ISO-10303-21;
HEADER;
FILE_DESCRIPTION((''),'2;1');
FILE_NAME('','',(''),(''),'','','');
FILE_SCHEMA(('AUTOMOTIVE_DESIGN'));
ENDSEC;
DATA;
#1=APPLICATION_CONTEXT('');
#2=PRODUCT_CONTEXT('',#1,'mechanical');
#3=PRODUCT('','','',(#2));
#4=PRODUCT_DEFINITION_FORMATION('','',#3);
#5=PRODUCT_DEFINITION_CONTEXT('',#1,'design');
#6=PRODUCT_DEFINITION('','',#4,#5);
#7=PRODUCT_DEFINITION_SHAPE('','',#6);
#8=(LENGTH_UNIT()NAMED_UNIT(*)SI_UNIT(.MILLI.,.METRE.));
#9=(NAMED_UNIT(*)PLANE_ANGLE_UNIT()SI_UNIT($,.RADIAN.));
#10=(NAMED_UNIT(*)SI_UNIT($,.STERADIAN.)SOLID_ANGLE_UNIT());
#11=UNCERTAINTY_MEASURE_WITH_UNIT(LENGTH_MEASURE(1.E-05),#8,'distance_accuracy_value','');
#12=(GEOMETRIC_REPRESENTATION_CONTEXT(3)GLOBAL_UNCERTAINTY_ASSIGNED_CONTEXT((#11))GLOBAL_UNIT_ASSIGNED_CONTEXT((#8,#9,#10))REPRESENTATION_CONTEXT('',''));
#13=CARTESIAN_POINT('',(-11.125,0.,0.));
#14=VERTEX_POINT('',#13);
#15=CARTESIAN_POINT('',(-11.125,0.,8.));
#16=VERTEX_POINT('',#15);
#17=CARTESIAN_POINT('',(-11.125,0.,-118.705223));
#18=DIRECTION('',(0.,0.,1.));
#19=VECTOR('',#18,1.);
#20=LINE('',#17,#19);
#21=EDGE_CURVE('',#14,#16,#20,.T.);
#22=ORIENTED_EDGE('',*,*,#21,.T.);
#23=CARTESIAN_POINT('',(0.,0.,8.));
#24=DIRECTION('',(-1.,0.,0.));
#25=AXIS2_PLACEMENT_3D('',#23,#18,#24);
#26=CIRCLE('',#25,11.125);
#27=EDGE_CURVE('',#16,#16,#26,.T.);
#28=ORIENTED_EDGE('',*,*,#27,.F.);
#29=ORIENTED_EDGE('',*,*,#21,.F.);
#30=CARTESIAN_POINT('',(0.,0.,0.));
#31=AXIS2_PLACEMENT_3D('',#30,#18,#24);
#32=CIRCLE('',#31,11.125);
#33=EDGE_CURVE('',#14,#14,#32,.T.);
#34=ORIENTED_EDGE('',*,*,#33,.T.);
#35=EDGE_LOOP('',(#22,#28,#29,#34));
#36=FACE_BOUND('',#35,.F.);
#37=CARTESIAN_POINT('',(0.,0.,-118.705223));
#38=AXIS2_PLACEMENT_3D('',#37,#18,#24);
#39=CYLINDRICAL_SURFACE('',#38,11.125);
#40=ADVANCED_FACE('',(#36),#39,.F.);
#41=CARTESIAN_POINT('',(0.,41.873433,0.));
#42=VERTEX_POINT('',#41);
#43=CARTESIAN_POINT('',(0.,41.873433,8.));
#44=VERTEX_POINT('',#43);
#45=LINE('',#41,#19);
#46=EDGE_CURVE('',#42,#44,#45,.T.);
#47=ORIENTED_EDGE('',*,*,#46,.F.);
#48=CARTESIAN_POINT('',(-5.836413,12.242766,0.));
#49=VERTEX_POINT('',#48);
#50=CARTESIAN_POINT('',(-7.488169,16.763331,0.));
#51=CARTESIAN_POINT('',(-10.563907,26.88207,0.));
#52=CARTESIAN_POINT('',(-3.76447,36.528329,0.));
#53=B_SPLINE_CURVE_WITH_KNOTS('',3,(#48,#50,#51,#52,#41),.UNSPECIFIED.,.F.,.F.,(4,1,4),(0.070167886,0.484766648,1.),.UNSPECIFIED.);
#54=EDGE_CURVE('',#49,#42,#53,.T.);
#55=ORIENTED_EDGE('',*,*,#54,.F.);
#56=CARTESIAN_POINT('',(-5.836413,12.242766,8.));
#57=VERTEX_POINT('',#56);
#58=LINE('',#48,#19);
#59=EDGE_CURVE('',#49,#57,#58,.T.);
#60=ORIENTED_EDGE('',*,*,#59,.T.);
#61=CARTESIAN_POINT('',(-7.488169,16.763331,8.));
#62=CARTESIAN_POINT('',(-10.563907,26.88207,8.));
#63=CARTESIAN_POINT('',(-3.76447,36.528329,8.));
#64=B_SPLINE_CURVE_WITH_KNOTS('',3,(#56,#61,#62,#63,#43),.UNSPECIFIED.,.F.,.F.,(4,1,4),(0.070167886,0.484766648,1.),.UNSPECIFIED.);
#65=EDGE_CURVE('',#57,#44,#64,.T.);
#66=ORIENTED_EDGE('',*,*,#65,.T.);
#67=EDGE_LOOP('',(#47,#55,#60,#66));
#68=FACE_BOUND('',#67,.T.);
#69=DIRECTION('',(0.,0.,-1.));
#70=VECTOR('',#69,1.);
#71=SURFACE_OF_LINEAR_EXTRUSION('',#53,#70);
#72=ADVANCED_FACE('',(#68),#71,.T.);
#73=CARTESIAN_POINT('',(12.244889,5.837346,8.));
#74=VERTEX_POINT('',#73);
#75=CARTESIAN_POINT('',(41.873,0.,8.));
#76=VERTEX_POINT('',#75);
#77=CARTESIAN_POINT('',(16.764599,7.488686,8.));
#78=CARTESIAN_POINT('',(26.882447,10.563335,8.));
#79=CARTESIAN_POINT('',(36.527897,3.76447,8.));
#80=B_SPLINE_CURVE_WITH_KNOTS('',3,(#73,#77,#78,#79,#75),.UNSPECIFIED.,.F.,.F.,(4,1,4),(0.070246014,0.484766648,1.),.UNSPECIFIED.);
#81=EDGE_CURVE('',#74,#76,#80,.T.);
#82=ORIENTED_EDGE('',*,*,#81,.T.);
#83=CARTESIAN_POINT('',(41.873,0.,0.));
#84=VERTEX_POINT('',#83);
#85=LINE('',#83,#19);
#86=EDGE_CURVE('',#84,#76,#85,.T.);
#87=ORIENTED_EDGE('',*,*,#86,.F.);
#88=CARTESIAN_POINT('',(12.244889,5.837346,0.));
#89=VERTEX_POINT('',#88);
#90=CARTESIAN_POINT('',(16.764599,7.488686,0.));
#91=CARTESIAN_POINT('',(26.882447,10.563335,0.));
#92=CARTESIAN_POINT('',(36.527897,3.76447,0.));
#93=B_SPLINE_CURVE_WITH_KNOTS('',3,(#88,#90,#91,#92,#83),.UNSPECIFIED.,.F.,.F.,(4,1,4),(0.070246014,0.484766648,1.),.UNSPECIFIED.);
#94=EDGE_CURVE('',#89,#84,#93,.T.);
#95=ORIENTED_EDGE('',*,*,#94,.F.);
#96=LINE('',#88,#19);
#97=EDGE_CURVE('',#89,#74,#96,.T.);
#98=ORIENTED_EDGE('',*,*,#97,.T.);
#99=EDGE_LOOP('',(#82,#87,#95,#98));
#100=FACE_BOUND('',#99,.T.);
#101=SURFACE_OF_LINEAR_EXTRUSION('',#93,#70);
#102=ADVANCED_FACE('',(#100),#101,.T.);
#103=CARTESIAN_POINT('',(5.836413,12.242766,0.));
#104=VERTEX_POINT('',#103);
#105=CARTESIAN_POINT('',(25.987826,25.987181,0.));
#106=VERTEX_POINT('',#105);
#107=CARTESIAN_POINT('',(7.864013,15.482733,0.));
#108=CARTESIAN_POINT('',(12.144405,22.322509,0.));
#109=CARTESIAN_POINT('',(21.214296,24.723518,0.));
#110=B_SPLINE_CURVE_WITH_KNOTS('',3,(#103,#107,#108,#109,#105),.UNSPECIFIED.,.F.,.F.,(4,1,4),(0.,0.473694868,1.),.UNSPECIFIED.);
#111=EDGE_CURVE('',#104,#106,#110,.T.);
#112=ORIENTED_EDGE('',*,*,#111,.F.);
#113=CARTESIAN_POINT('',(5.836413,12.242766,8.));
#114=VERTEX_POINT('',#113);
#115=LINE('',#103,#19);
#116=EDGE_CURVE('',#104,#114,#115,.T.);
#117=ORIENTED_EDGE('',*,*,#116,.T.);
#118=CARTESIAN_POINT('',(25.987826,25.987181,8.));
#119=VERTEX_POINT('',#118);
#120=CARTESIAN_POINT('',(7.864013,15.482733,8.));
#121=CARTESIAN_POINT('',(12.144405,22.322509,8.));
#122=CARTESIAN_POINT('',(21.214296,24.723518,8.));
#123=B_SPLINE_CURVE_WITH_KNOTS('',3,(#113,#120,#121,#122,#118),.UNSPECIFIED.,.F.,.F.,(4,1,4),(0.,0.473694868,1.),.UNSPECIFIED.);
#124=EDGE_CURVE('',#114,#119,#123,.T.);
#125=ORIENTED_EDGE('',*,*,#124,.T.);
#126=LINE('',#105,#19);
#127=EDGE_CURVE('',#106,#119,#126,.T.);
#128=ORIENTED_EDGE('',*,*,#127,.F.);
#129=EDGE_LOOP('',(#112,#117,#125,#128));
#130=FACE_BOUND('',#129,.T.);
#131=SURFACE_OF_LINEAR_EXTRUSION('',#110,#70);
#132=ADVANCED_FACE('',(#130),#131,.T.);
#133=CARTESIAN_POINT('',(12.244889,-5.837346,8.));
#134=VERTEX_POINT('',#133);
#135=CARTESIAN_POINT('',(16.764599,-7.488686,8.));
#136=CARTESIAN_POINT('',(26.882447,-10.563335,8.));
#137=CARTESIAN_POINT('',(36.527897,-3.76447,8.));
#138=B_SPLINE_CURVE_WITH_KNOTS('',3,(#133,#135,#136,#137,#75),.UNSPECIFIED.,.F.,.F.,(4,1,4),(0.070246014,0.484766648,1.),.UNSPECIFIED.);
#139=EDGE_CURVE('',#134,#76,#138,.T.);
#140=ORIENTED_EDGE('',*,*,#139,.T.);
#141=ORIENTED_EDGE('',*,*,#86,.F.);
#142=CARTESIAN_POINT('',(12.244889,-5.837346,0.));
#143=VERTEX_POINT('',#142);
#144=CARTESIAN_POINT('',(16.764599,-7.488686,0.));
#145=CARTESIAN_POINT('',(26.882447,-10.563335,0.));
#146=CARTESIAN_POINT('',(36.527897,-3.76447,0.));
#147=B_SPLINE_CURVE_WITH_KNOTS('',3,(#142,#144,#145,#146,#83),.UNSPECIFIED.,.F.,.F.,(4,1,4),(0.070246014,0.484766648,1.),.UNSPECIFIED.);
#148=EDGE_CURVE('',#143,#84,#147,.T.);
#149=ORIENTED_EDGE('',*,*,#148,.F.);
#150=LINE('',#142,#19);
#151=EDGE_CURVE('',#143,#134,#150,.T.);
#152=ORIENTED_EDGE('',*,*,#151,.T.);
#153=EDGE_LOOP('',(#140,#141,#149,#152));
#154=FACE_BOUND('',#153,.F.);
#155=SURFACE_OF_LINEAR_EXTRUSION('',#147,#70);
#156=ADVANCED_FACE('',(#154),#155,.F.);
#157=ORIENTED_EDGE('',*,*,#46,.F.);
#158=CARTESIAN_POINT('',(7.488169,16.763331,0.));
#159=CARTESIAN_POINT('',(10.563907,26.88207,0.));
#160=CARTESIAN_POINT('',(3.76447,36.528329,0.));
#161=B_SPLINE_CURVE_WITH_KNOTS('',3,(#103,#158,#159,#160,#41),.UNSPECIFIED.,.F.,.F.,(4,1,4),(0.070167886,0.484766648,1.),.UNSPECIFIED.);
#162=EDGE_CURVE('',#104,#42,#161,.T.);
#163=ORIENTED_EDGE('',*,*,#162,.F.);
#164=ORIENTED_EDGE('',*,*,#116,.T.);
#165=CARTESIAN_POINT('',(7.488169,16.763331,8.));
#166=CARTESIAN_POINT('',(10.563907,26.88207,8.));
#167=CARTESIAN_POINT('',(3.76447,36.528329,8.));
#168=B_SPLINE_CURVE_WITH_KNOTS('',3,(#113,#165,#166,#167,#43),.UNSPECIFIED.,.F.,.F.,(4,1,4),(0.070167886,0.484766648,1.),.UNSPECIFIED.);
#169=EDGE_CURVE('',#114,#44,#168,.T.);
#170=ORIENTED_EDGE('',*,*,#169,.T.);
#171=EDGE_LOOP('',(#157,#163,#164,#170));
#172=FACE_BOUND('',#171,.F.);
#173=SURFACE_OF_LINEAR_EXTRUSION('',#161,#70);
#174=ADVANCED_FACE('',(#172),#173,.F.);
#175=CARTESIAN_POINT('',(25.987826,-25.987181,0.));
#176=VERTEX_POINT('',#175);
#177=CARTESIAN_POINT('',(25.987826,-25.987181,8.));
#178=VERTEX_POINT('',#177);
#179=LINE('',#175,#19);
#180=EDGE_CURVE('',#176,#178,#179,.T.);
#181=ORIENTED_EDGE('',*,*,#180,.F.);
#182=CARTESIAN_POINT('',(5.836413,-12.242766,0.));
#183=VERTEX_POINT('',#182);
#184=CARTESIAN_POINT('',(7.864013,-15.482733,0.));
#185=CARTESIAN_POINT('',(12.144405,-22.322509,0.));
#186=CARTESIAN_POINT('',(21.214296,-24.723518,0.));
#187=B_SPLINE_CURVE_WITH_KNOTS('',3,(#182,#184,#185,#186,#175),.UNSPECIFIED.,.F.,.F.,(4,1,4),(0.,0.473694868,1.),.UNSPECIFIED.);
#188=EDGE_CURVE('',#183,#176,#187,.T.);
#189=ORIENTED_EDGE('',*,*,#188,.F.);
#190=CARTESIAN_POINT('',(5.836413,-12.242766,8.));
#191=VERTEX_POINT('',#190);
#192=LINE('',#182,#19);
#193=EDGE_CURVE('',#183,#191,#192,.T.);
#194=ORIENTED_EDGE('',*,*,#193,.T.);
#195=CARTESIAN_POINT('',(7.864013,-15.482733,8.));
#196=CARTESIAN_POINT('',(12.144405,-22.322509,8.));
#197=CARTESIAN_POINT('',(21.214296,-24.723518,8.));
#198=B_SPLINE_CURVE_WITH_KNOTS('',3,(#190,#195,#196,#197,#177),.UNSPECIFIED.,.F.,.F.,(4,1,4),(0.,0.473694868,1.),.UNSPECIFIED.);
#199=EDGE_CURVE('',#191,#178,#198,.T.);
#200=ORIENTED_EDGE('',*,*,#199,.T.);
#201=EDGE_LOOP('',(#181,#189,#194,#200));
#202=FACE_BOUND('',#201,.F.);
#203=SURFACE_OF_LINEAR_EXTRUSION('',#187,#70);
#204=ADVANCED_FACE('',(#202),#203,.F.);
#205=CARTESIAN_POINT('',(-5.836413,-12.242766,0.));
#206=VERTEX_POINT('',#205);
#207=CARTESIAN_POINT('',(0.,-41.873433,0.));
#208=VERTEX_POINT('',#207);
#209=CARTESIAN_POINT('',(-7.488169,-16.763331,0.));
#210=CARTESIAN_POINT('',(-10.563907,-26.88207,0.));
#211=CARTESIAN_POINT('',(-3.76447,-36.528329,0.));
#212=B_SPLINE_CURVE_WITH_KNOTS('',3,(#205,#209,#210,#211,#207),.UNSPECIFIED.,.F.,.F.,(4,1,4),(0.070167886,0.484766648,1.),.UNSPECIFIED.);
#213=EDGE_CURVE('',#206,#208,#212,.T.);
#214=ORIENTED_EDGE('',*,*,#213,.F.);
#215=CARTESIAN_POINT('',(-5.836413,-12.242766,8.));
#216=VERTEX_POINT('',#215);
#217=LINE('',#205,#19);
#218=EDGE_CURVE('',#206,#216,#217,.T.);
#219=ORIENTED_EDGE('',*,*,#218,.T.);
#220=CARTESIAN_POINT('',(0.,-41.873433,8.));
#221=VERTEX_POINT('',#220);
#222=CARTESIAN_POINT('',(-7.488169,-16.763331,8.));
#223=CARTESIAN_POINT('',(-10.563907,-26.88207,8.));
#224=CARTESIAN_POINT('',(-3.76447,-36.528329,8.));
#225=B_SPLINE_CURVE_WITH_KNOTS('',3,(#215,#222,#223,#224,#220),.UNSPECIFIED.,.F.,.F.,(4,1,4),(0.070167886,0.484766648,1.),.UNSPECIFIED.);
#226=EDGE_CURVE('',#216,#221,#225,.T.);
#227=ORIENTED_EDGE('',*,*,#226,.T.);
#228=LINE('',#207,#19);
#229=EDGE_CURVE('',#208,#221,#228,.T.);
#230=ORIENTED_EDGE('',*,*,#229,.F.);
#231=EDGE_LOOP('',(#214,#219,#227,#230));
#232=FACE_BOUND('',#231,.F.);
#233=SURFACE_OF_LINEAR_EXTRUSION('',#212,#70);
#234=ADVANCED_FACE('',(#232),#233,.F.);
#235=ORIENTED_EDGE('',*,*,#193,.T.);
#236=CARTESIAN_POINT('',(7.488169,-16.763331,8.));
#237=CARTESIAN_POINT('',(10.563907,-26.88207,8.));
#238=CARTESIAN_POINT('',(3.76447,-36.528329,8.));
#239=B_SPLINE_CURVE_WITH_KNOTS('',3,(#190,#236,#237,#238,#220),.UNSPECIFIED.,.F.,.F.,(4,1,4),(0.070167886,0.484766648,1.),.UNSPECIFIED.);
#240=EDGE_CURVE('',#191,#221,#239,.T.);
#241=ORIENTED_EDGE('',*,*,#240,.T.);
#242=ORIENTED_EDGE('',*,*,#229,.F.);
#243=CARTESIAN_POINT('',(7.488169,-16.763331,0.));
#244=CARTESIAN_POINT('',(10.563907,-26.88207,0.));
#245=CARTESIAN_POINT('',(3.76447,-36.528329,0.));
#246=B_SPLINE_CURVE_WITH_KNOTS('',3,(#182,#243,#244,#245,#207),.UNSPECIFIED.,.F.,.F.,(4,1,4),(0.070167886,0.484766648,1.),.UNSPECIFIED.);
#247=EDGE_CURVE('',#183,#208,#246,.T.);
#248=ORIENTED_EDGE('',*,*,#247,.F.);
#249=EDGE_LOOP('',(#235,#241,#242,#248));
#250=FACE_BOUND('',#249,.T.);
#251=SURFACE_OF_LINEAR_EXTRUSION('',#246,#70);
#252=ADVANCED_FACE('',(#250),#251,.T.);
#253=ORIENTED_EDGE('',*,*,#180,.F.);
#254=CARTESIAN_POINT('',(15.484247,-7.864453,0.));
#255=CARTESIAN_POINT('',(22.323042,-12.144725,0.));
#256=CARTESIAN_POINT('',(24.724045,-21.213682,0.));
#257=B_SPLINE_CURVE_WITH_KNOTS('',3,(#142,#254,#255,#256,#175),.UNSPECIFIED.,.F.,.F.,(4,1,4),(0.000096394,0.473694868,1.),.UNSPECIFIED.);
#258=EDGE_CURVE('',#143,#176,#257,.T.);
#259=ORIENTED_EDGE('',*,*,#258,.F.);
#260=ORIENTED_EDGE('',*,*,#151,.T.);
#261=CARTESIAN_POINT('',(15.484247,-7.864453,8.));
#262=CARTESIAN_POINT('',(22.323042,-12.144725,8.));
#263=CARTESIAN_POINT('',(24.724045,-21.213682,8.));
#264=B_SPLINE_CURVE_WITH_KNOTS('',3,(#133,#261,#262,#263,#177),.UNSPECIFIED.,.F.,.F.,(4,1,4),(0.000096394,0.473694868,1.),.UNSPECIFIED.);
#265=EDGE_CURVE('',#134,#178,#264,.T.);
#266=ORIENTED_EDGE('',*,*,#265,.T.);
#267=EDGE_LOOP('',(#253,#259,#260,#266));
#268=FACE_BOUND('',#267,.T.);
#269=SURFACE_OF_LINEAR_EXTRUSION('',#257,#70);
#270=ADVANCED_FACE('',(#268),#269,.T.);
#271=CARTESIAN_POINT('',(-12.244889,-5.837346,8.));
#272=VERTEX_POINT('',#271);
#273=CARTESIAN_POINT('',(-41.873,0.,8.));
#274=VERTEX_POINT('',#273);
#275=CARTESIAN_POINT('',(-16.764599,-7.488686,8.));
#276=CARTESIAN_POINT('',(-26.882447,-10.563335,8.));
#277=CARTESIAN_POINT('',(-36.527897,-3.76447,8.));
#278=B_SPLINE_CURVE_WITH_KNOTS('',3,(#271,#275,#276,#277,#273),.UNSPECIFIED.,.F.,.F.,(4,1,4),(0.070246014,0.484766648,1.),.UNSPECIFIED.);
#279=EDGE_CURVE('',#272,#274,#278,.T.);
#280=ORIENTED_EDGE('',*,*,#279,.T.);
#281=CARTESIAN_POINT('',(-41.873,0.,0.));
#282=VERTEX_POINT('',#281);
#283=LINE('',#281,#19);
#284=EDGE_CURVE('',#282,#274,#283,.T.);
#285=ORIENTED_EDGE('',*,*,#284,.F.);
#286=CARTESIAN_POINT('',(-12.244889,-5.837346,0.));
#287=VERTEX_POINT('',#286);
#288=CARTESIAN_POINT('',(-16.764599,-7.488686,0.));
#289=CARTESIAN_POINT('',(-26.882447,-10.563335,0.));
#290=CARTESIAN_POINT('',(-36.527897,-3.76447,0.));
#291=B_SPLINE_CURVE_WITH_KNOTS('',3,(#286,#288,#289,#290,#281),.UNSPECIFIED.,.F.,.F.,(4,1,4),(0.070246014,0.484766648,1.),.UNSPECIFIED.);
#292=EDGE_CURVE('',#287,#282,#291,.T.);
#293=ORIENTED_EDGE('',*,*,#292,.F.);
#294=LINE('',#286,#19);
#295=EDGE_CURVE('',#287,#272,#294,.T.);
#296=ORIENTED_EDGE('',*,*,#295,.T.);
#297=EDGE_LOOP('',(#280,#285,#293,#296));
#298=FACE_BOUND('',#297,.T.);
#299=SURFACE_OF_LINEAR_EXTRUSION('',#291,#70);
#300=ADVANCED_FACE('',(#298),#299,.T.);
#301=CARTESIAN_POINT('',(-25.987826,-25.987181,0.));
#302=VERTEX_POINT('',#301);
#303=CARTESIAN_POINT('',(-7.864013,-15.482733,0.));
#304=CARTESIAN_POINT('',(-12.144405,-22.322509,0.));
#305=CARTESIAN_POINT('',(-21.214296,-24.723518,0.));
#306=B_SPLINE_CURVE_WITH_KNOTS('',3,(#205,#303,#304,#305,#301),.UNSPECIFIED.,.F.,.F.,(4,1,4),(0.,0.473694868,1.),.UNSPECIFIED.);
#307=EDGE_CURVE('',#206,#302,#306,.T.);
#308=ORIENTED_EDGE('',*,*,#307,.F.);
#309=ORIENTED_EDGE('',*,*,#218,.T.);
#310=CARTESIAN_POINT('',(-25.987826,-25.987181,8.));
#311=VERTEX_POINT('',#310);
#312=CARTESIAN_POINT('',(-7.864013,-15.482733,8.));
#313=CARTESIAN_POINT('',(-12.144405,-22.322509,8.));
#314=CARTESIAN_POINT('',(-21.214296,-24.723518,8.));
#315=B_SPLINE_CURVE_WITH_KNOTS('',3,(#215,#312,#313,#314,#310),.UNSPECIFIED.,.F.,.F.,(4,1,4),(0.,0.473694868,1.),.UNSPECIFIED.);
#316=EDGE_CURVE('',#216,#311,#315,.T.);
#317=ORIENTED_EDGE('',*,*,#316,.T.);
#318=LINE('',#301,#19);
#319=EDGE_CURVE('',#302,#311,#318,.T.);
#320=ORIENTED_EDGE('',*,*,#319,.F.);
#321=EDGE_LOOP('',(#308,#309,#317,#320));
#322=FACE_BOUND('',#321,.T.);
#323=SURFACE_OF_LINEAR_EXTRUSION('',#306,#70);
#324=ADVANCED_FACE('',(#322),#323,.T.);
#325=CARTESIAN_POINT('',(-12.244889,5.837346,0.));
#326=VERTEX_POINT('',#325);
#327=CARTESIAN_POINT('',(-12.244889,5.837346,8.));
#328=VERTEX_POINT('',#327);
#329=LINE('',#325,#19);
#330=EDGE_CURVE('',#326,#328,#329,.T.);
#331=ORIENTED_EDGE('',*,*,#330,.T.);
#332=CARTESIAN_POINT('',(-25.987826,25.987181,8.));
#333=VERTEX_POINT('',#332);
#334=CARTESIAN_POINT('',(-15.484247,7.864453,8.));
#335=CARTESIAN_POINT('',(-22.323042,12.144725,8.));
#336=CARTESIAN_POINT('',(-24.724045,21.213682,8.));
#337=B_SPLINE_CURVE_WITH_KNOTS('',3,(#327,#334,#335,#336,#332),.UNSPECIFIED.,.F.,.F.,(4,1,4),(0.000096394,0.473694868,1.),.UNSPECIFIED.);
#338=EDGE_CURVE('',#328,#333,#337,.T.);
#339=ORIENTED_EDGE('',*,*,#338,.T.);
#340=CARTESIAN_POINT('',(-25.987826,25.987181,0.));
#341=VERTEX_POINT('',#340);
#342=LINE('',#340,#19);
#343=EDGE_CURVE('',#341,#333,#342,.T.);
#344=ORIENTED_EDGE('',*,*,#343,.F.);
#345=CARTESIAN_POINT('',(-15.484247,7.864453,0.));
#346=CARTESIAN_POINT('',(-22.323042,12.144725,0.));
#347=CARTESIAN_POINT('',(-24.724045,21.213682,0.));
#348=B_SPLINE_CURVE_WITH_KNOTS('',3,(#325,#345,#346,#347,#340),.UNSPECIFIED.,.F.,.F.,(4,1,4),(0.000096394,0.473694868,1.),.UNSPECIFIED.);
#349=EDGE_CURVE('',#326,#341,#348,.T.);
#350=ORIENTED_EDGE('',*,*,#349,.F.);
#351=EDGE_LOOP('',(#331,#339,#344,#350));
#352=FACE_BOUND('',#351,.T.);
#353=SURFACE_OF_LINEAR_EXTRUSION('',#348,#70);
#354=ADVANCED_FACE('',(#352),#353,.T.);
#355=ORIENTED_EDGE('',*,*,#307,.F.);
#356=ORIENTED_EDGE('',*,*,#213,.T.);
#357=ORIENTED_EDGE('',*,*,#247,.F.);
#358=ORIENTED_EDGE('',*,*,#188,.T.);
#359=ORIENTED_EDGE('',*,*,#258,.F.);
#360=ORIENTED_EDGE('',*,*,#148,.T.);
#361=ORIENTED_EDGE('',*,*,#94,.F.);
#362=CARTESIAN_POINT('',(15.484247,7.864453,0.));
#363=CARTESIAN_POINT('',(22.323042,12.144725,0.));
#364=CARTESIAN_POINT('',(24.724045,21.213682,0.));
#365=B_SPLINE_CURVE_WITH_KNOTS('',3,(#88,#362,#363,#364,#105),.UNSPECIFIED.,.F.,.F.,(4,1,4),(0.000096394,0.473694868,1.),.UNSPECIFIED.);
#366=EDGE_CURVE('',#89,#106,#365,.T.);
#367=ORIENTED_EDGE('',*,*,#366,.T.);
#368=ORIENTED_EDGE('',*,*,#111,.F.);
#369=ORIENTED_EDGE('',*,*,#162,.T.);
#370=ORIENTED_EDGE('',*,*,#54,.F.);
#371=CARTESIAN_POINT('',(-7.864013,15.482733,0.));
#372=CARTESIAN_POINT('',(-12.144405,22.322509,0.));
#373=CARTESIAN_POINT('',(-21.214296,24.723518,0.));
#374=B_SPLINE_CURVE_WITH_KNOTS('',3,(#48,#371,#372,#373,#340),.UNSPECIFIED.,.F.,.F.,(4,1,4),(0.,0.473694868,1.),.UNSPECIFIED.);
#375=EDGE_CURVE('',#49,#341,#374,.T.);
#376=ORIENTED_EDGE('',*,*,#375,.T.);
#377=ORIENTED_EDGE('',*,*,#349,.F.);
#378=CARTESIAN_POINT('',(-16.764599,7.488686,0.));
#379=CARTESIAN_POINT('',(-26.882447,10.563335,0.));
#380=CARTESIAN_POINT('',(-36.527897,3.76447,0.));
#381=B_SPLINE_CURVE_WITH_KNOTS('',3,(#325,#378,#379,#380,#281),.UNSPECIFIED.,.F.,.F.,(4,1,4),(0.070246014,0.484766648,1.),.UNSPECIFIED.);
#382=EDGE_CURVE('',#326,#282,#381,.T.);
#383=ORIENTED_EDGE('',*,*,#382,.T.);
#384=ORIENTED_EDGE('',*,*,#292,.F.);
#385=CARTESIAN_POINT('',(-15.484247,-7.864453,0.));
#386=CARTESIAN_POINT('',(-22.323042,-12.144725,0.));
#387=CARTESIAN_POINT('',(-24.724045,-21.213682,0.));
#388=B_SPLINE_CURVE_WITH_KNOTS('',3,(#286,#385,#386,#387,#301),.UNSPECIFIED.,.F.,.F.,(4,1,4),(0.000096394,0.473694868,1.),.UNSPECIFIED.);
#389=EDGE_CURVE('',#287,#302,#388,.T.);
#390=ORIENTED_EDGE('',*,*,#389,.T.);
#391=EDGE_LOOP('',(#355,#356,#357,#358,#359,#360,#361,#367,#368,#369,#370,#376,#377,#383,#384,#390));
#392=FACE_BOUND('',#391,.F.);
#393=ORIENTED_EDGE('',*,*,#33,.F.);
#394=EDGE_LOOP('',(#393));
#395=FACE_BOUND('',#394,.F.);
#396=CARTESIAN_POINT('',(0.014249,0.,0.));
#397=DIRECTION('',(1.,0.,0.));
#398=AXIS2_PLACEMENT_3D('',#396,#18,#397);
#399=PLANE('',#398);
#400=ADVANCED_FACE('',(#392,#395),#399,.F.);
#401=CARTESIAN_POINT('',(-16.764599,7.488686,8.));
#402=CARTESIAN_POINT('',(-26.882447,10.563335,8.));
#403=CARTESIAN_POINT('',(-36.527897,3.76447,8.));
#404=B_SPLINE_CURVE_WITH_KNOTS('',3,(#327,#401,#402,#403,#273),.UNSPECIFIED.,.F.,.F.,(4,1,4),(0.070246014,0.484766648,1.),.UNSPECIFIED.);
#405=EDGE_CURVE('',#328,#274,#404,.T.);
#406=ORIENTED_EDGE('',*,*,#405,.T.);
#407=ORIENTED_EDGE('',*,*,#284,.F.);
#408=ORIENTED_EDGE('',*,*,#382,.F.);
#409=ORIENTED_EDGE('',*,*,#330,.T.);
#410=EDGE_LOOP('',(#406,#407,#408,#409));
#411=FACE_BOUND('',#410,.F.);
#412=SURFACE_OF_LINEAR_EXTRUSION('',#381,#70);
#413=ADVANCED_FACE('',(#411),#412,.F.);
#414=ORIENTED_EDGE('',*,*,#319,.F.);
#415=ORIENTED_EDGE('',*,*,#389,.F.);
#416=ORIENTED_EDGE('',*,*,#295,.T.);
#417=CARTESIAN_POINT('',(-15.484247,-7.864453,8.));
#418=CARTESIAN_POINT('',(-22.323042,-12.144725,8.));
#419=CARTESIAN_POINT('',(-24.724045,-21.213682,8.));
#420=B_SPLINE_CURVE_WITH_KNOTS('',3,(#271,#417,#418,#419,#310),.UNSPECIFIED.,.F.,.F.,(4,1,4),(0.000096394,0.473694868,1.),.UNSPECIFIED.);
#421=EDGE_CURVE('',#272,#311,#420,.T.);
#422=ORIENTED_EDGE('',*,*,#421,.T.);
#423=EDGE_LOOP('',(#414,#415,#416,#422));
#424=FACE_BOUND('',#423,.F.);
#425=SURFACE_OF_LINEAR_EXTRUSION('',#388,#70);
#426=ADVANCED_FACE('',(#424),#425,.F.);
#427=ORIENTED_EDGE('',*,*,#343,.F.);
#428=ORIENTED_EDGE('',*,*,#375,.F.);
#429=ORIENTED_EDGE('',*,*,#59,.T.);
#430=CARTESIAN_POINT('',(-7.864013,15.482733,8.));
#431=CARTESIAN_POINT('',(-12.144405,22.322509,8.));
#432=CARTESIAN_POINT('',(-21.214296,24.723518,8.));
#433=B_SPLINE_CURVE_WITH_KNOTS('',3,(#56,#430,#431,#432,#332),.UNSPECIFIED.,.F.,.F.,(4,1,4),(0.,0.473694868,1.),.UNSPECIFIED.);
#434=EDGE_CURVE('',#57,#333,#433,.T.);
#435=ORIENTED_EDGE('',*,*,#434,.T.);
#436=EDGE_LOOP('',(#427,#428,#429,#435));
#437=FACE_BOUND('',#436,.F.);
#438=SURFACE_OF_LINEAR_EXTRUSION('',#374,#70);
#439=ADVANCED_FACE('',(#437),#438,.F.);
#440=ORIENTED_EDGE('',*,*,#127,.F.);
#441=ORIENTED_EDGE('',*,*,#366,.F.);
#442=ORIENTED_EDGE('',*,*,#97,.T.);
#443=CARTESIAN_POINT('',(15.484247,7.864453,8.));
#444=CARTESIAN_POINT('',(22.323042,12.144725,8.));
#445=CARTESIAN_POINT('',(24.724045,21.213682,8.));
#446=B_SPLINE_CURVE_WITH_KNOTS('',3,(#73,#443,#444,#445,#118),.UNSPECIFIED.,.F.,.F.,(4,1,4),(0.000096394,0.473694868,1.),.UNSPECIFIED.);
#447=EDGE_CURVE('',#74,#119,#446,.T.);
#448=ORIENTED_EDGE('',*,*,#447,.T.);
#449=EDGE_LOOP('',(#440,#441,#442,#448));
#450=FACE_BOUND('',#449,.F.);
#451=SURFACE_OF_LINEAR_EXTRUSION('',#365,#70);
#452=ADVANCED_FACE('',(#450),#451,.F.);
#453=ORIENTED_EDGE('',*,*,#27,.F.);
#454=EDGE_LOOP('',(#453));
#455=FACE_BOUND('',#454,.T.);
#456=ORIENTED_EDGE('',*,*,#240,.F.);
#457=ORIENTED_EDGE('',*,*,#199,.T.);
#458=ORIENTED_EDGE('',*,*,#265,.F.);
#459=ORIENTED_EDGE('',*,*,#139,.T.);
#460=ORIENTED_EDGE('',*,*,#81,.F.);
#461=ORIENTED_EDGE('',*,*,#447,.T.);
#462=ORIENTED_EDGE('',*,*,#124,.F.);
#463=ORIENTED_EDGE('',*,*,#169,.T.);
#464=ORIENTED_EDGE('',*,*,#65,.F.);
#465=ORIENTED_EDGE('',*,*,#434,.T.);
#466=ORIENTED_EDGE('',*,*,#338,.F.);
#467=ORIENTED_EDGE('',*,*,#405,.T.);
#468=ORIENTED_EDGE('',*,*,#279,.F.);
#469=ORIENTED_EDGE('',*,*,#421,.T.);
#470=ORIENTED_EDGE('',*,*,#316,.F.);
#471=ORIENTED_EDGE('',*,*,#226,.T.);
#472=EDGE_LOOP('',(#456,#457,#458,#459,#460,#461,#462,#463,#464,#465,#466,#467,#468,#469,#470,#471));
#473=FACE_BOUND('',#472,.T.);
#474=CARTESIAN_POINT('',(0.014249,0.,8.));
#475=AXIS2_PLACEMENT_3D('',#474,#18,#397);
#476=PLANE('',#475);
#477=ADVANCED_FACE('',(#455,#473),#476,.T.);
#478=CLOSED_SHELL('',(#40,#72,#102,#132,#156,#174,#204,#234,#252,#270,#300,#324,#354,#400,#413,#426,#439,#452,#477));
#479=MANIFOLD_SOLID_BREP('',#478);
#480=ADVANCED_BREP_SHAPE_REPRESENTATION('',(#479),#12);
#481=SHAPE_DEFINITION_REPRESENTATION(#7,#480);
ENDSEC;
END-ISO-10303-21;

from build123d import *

# Parameters (mm, degrees)
F1_DEPTH = 8
F3_D     = 22.25


with BuildPart() as f1:
    # F0 (on Top) → F1 (new body)
    with BuildSketch(Plane.XY):
        with BuildLine():
            ThreePointArc((9.9471375726, 4.9819754226), (7.8665088435, 7.8666170375), (4.9818386126, 9.9472060921))
            ThreePointArc((4.9818386126, 9.9472060921), (0, 11.125), (-4.9818386126, 9.9472060921))
            ThreePointArc((-4.9818386126, 9.9472060921), (-7.8665088435, 7.8666170375), (-9.9471375726, 4.9819754226))
            ThreePointArc((-9.9471375726, 4.9819754226), (-11.125, 0), (-9.9471375726, -4.9819754226))
            ThreePointArc((-9.9471375726, -4.9819754226), (-7.8665088435, -7.8666170375), (-4.9818386126, -9.9472060921))
            ThreePointArc((-4.9818386126, -9.9472060921), (0, -11.125), (4.9818386126, -9.9472060921))
            ThreePointArc((4.9818386126, -9.9472060921), (7.8665088435, -7.8666170375), (9.9471375726, -4.9819754226))
            ThreePointArc((9.9471375726, -4.9819754226), (10.8265306192, -2.5596600853), (11.125, 0))
            ThreePointArc((11.125, 0), (10.8265306192, 2.5596600853), (9.9471375726, 4.9819754226))
        make_face()
        with BuildLine():
            add(Edge.make_bspline(
                [(4.9818386126, 9.9472060921), (5.2692870464, 10.7123686961), (5.5568645372, 11.4776931218), (5.8364125218, 12.242766493)],
                knots=[0, 0, 0, 0, 0.0701678859, 0.0701678859, 0.0701678859, 0.0701678859], degree=3))
            ThreePointArc((4.9818386126, 9.9472060921), (7.8665088435, 7.8666170375), (9.9471375726, 4.9819754226))
            add(Edge.make_bspline(
                [(9.9471375726, 4.9819754226), (10.7123016854, 5.2694244447), (11.4776275551, 5.5570012299), (12.2427023029, 5.8365471685)],
                knots=[1.11321e-05, 1.11321e-05, 1.11321e-05, 1.11321e-05, 0.0701791516, 0.0701791516, 0.0701791516, 0.0701791516], degree=3))
            ThreePointArc((12.2427023029, 5.8365471685), (9.5902820459, 9.5903875212), (5.8364125218, 12.242766493))
        make_face()
        with BuildLine():
            ThreePointArc((-4.9818386126, 9.9472060921), (0, 11.125), (4.9818386126, 9.9472060921))
            add(Edge.make_bspline(
                [(4.9818386126, 9.9472060921), (5.2692870464, 10.7123686961), (5.5568645372, 11.4776931218), (5.8364125218, 12.242766493)],
                knots=[0, 0, 0, 0, 0.0701678859, 0.0701678859, 0.0701678859, 0.0701678859], degree=3))
            ThreePointArc((5.8364125218, 12.242766493), (0, 13.5627815188), (-5.8364125218, 12.242766493))
            add(Edge.make_bspline(
                [(-4.9818386126, 9.9472060921), (-5.2692870464, 10.7123686961), (-5.5568645372, 11.4776931218), (-5.8364125218, 12.242766493)],
                knots=[0, 0, 0, 0, 0.0701678859, 0.0701678859, 0.0701678859, 0.0701678859], degree=3))
        make_face()
        with BuildLine():
            ThreePointArc((-9.9471375726, 4.9819754226), (-7.8665088435, 7.8666170375), (-4.9818386126, 9.9472060921))
            add(Edge.make_bspline(
                [(-4.9818386126, 9.9472060921), (-5.2692870464, 10.7123686961), (-5.5568645372, 11.4776931218), (-5.8364125218, 12.242766493)],
                knots=[0, 0, 0, 0, 0.0701678859, 0.0701678859, 0.0701678859, 0.0701678859], degree=3))
            ThreePointArc((-5.8364125218, 12.242766493), (-9.5902820459, 9.5903875212), (-12.2427023029, 5.8365471685))
            add(Edge.make_bspline(
                [(-9.9471375726, 4.9819754226), (-10.7123016854, 5.2694244447), (-11.4776275551, 5.5570012299), (-12.2427023029, 5.8365471685)],
                knots=[1.11321e-05, 1.11321e-05, 1.11321e-05, 1.11321e-05, 0.0701791516, 0.0701791516, 0.0701791516, 0.0701791516], degree=3))
        make_face()
        with BuildLine():
            add(Edge.make_bspline(
                [(9.9471375726, 4.9819754226), (10.7123016854, 5.2694244447), (11.4776275551, 5.5570012299), (12.2427023029, 5.8365471685)],
                knots=[1.11321e-05, 1.11321e-05, 1.11321e-05, 1.11321e-05, 0.0701791516, 0.0701791516, 0.0701791516, 0.0701791516], degree=3))
            ThreePointArc((9.9471375726, 4.9819754226), (10.8265306192, 2.5596600853), (11.125, 0))
            ThreePointArc((11.125, 0), (10.8265306192, -2.5596600853), (9.9471375726, -4.9819754226))
            add(Edge.make_bspline(
                [(9.9471375726, -4.9819754226), (10.7123016854, -5.2694244447), (11.4776275551, -5.5570012299), (12.2427023029, -5.8365471685)],
                knots=[1.11321e-05, 1.11321e-05, 1.11321e-05, 1.11321e-05, 0.0701791516, 0.0701791516, 0.0701791516, 0.0701791516], degree=3))
            ThreePointArc((12.2427023029, -5.8365471685), (12.2428068623, -5.8363278403), (12.2429114178, -5.8361085102))
            ThreePointArc((12.2429114178, -5.8361085102), (13.2286993926, -2.9917478013), (13.5627815188, 0))
            ThreePointArc((13.5627815188, 0), (13.2286993926, 2.9917478013), (12.2429114178, 5.8361085102))
            ThreePointArc((12.2429114178, 5.8361085102), (12.2428068623, 5.8363278403), (12.2427023029, 5.8365471685))
        make_face()
        with BuildLine():
            ThreePointArc((-5.8364125218, 12.242766493), (0, 13.5627815188), (5.8364125218, 12.242766493))
            add(Edge.make_bspline(
                [(5.8364125218, 12.242766493), (7.4881688325, 16.7633312564), (10.5639067692, 26.8820696151), (3.7644701713, 36.5283294837), (0, 41.8734326959)],
                knots=[0.0701678859, 0.0701678859, 0.0701678859, 0.0701678859, 0.484766648, 1, 1, 1, 1], degree=3))
            add(Edge.make_bspline(
                [(-5.8364125218, 12.242766493), (-7.4881688325, 16.7633312564), (-10.5639067692, 26.8820696151), (-3.7644701713, 36.5283294837), (0, 41.8734326959)],
                knots=[0.0701678859, 0.0701678859, 0.0701678859, 0.0701678859, 0.484766648, 1, 1, 1, 1], degree=3))
        make_face()
        Polygon((2.4637663324, 30.8732958237), (5.4101836661, 26.3272686725), (2.9464173337, 21.5025828357), (-2.4637663324, 21.2239241501), (-5.4101836661, 25.7699513014), (-2.9464173337, 30.5946371381), align=None, mode=Mode.SUBTRACT)
        with BuildLine():
            add(Edge.make_bspline(
                [(5.8364125218, 12.242766493), (7.8640126159, 15.4827332927), (12.1444054008, 22.3225093182), (21.2142960732, 24.7235177216), (25.987826083, 25.9871807669)],
                knots=[0, 0, 0, 0, 0.4736948677, 1, 1, 1, 1], degree=3))
            ThreePointArc((5.8364125218, 12.242766493), (9.5902820459, 9.5903875212), (12.2427023029, 5.8365471685))
            add(Edge.make_bspline(
                [(12.2427023029, 5.8365471685), (12.2434313303, 5.8368135433), (12.2441603575, 5.8370799108), (12.2448893845, 5.8373462711)],
                knots=[0.0701791516, 0.0701791516, 0.0701791516, 0.0701791516, 0.0702460136, 0.0702460136, 0.0702460136, 0.0702460136], degree=3))
            add(Edge.make_bspline(
                [(12.2448893845, 5.8373462711), (15.4842471687, 7.8644533679), (22.3230423426, 12.1447253647), (24.7240445028, 21.2136821375), (25.987826083, 25.9871807669)],
                knots=[9.63938e-05, 9.63938e-05, 9.63938e-05, 9.63938e-05, 0.4736948677, 1, 1, 1, 1], degree=3))
        make_face()
        with BuildLine():
            ThreePointArc((-9.9471375726, -4.9819754226), (-11.125, 0), (-9.9471375726, 4.9819754226))
            add(Edge.make_bspline(
                [(-9.9471375726, 4.9819754226), (-10.7123016854, 5.2694244447), (-11.4776275551, 5.5570012299), (-12.2427023029, 5.8365471685)],
                knots=[1.11321e-05, 1.11321e-05, 1.11321e-05, 1.11321e-05, 0.0701791516, 0.0701791516, 0.0701791516, 0.0701791516], degree=3))
            ThreePointArc((-12.2427023029, 5.8365471685), (-12.2428068623, 5.8363278403), (-12.2429114178, 5.8361085102))
            ThreePointArc((-12.2429114178, 5.8361085102), (-13.5627815188, 0), (-12.2429114178, -5.8361085102))
            ThreePointArc((-12.2429114178, -5.8361085102), (-12.2428068623, -5.8363278403), (-12.2427023029, -5.8365471685))
            add(Edge.make_bspline(
                [(-9.9471375726, -4.9819754226), (-10.7123016854, -5.2694244447), (-11.4776275551, -5.5570012299), (-12.2427023029, -5.8365471685)],
                knots=[1.11321e-05, 1.11321e-05, 1.11321e-05, 1.11321e-05, 0.0701791516, 0.0701791516, 0.0701791516, 0.0701791516], degree=3))
        make_face()
        with BuildLine():
            ThreePointArc((-12.2427023029, 5.8365471685), (-9.5902820459, 9.5903875212), (-5.8364125218, 12.242766493))
            add(Edge.make_bspline(
                [(-5.8364125218, 12.242766493), (-7.8640126159, 15.4827332927), (-12.1444054008, 22.3225093182), (-21.2142960732, 24.7235177216), (-25.987826083, 25.9871807669)],
                knots=[0, 0, 0, 0, 0.4736948677, 1, 1, 1, 1], degree=3))
            add(Edge.make_bspline(
                [(-12.2448893845, 5.8373462711), (-15.4842471687, 7.8644533679), (-22.3230423426, 12.1447253647), (-24.7240445028, 21.2136821375), (-25.987826083, 25.9871807669)],
                knots=[9.63938e-05, 9.63938e-05, 9.63938e-05, 9.63938e-05, 0.4736948677, 1, 1, 1, 1], degree=3))
            add(Edge.make_bspline(
                [(-12.2427023029, 5.8365471685), (-12.2434313303, 5.8368135433), (-12.2441603575, 5.8370799108), (-12.2448893845, 5.8373462711)],
                knots=[0.0701791516, 0.0701791516, 0.0701791516, 0.0701791516, 0.0702460136, 0.0702460136, 0.0702460136, 0.0702460136], degree=3))
        make_face()
        with BuildLine():
            add(Edge.make_bspline(
                [(12.2427023029, 5.8365471685), (12.2434313303, 5.8368135433), (12.2441603575, 5.8370799108), (12.2448893845, 5.8373462711)],
                knots=[0.0701791516, 0.0701791516, 0.0701791516, 0.0701791516, 0.0702460136, 0.0702460136, 0.0702460136, 0.0702460136], degree=3))
            ThreePointArc((12.2427023029, 5.8365471685), (12.2428068623, 5.8363278403), (12.2429114178, 5.8361085102))
            add(Edge.make_bspline(
                [(12.2429114178, 5.8361085102), (12.24357074, 5.8365210972), (12.2442300623, 5.8369336841), (12.2448893845, 5.8373462711)],
                knots=[0, 0, 0, 0, 9.63938e-05, 9.63938e-05, 9.63938e-05, 9.63938e-05], degree=3))
        make_face()
        with BuildLine():
            ThreePointArc((-4.9818386126, -9.9472060921), (-7.8665088435, -7.8666170375), (-9.9471375726, -4.9819754226))
            add(Edge.make_bspline(
                [(-9.9471375726, -4.9819754226), (-10.7123016854, -5.2694244447), (-11.4776275551, -5.5570012299), (-12.2427023029, -5.8365471685)],
                knots=[1.11321e-05, 1.11321e-05, 1.11321e-05, 1.11321e-05, 0.0701791516, 0.0701791516, 0.0701791516, 0.0701791516], degree=3))
            ThreePointArc((-12.2427023029, -5.8365471685), (-9.5902820459, -9.5903875212), (-5.8364125218, -12.242766493))
            add(Edge.make_bspline(
                [(-4.9818386126, -9.9472060921), (-5.2692870464, -10.7123686961), (-5.5568645372, -11.4776931218), (-5.8364125218, -12.242766493)],
                knots=[0, 0, 0, 0, 0.0701678859, 0.0701678859, 0.0701678859, 0.0701678859], degree=3))
        make_face()
        with BuildLine():
            ThreePointArc((-12.2429114178, 5.8361085102), (-12.2428068623, 5.8363278403), (-12.2427023029, 5.8365471685))
            add(Edge.make_bspline(
                [(-12.2427023029, 5.8365471685), (-12.2434313303, 5.8368135433), (-12.2441603575, 5.8370799108), (-12.2448893845, 5.8373462711)],
                knots=[0.0701791516, 0.0701791516, 0.0701791516, 0.0701791516, 0.0702460136, 0.0702460136, 0.0702460136, 0.0702460136], degree=3))
            add(Edge.make_bspline(
                [(-12.2429114178, 5.8361085102), (-12.24357074, 5.8365210972), (-12.2442300623, 5.8369336841), (-12.2448893845, 5.8373462711)],
                knots=[0, 0, 0, 0, 9.63938e-05, 9.63938e-05, 9.63938e-05, 9.63938e-05], degree=3))
        make_face()
        with BuildLine():
            add(Edge.make_bspline(
                [(9.9471375726, -4.9819754226), (10.7123016854, -5.2694244447), (11.4776275551, -5.5570012299), (12.2427023029, -5.8365471685)],
                knots=[1.11321e-05, 1.11321e-05, 1.11321e-05, 1.11321e-05, 0.0701791516, 0.0701791516, 0.0701791516, 0.0701791516], degree=3))
            ThreePointArc((9.9471375726, -4.9819754226), (7.8665088435, -7.8666170375), (4.9818386126, -9.9472060921))
            add(Edge.make_bspline(
                [(4.9818386126, -9.9472060921), (5.2692870464, -10.7123686961), (5.5568645372, -11.4776931218), (5.8364125218, -12.242766493)],
                knots=[0, 0, 0, 0, 0.0701678859, 0.0701678859, 0.0701678859, 0.0701678859], degree=3))
            ThreePointArc((5.8364125218, -12.242766493), (9.5902820459, -9.5903875212), (12.2427023029, -5.8365471685))
        make_face()
        with BuildLine():
            add(Edge.make_bspline(
                [(12.2448893845, 5.8373462711), (16.7645989794, 7.4886856309), (26.8824474311, 10.5633354573), (36.5278967878, 3.7644701713), (41.873, 0)],
                knots=[0.0702460136, 0.0702460136, 0.0702460136, 0.0702460136, 0.484766648, 1, 1, 1, 1], degree=3))
            add(Edge.make_bspline(
                [(12.2429114178, 5.8361085102), (12.24357074, 5.8365210972), (12.2442300623, 5.8369336841), (12.2448893845, 5.8373462711)],
                knots=[0, 0, 0, 0, 9.63938e-05, 9.63938e-05, 9.63938e-05, 9.63938e-05], degree=3))
            ThreePointArc((12.2429114178, 5.8361085102), (13.2286993926, 2.9917478013), (13.5627815188, 0))
            ThreePointArc((13.5627815188, 0), (13.2286993926, -2.9917478013), (12.2429114178, -5.8361085102))
            add(Edge.make_bspline(
                [(12.2429114178, -5.8361085102), (12.24357074, -5.8365210972), (12.2442300623, -5.8369336841), (12.2448893845, -5.8373462711)],
                knots=[0, 0, 0, 0, 9.63938e-05, 9.63938e-05, 9.63938e-05, 9.63938e-05], degree=3))
            add(Edge.make_bspline(
                [(12.2448893845, -5.8373462711), (16.7645989794, -7.4886856309), (26.8824474311, -10.5633354573), (36.5278967878, -3.7644701713), (41.873, 0)],
                knots=[0.0702460136, 0.0702460136, 0.0702460136, 0.0702460136, 0.484766648, 1, 1, 1, 1], degree=3))
        make_face()
        Polygon((25.7699513014, 5.4101836661), (30.5946371381, 2.9464173337), (30.8732958237, -2.4637663324), (26.3272686725, -5.4101836661), (21.5025828357, -2.9464173337), (21.2239241501, 2.4637663324), align=None, mode=Mode.SUBTRACT)
        with BuildLine():
            ThreePointArc((4.9818386126, -9.9472060921), (0, -11.125), (-4.9818386126, -9.9472060921))
            add(Edge.make_bspline(
                [(-4.9818386126, -9.9472060921), (-5.2692870464, -10.7123686961), (-5.5568645372, -11.4776931218), (-5.8364125218, -12.242766493)],
                knots=[0, 0, 0, 0, 0.0701678859, 0.0701678859, 0.0701678859, 0.0701678859], degree=3))
            ThreePointArc((-5.8364125218, -12.242766493), (0, -13.5627815188), (5.8364125218, -12.242766493))
            add(Edge.make_bspline(
                [(4.9818386126, -9.9472060921), (5.2692870464, -10.7123686961), (5.5568645372, -11.4776931218), (5.8364125218, -12.242766493)],
                knots=[0, 0, 0, 0, 0.0701678859, 0.0701678859, 0.0701678859, 0.0701678859], degree=3))
        make_face()
        with BuildLine():
            ThreePointArc((-5.8364125218, -12.242766493), (-9.5902820459, -9.5903875212), (-12.2427023029, -5.8365471685))
            add(Edge.make_bspline(
                [(-12.2427023029, -5.8365471685), (-12.2434313303, -5.8368135433), (-12.2441603575, -5.8370799108), (-12.2448893845, -5.8373462711)],
                knots=[0.0701791516, 0.0701791516, 0.0701791516, 0.0701791516, 0.0702460136, 0.0702460136, 0.0702460136, 0.0702460136], degree=3))
            add(Edge.make_bspline(
                [(-12.2448893845, -5.8373462711), (-15.4842471687, -7.8644533679), (-22.3230423426, -12.1447253647), (-24.7240445028, -21.2136821375), (-25.987826083, -25.9871807669)],
                knots=[9.63938e-05, 9.63938e-05, 9.63938e-05, 9.63938e-05, 0.4736948677, 1, 1, 1, 1], degree=3))
            add(Edge.make_bspline(
                [(-5.8364125218, -12.242766493), (-7.8640126159, -15.4827332927), (-12.1444054008, -22.3225093182), (-21.2142960732, -24.7235177216), (-25.987826083, -25.9871807669)],
                knots=[0, 0, 0, 0, 0.4736948677, 1, 1, 1, 1], degree=3))
        make_face()
        with BuildLine():
            add(Edge.make_bspline(
                [(-12.2427023029, -5.8365471685), (-12.2434313303, -5.8368135433), (-12.2441603575, -5.8370799108), (-12.2448893845, -5.8373462711)],
                knots=[0.0701791516, 0.0701791516, 0.0701791516, 0.0701791516, 0.0702460136, 0.0702460136, 0.0702460136, 0.0702460136], degree=3))
            ThreePointArc((-12.2427023029, -5.8365471685), (-12.2428068623, -5.8363278403), (-12.2429114178, -5.8361085102))
            add(Edge.make_bspline(
                [(-12.2429114178, -5.8361085102), (-12.24357074, -5.8365210972), (-12.2442300623, -5.8369336841), (-12.2448893845, -5.8373462711)],
                knots=[0, 0, 0, 0, 9.63938e-05, 9.63938e-05, 9.63938e-05, 9.63938e-05], degree=3))
        make_face()
        with BuildLine():
            add(Edge.make_bspline(
                [(-12.2429114178, 5.8361085102), (-12.24357074, 5.8365210972), (-12.2442300623, 5.8369336841), (-12.2448893845, 5.8373462711)],
                knots=[0, 0, 0, 0, 9.63938e-05, 9.63938e-05, 9.63938e-05, 9.63938e-05], degree=3))
            add(Edge.make_bspline(
                [(-12.2448893845, 5.8373462711), (-16.7645989794, 7.4886856309), (-26.8824474311, 10.5633354573), (-36.5278967878, 3.7644701713), (-41.873, 0)],
                knots=[0.0702460136, 0.0702460136, 0.0702460136, 0.0702460136, 0.484766648, 1, 1, 1, 1], degree=3))
            add(Edge.make_bspline(
                [(-12.2448893845, -5.8373462711), (-16.7645989794, -7.4886856309), (-26.8824474311, -10.5633354573), (-36.5278967878, -3.7644701713), (-41.873, 0)],
                knots=[0.0702460136, 0.0702460136, 0.0702460136, 0.0702460136, 0.484766648, 1, 1, 1, 1], degree=3))
            add(Edge.make_bspline(
                [(-12.2429114178, -5.8361085102), (-12.24357074, -5.8365210972), (-12.2442300623, -5.8369336841), (-12.2448893845, -5.8373462711)],
                knots=[0, 0, 0, 0, 9.63938e-05, 9.63938e-05, 9.63938e-05, 9.63938e-05], degree=3))
            ThreePointArc((-12.2429114178, -5.8361085102), (-13.5627815188, 0), (-12.2429114178, 5.8361085102))
        make_face()
        Polygon((-25.7699513014, -5.4101836661), (-30.5946371381, -2.9464173337), (-30.8732958237, 2.4637663324), (-26.3272686725, 5.4101836661), (-21.5025828357, 2.9464173337), (-21.2239241501, -2.4637663324), align=None, mode=Mode.SUBTRACT)
        with BuildLine():
            ThreePointArc((12.2429114178, -5.8361085102), (12.2428068623, -5.8363278403), (12.2427023029, -5.8365471685))
            add(Edge.make_bspline(
                [(12.2427023029, -5.8365471685), (12.2434313303, -5.8368135433), (12.2441603575, -5.8370799108), (12.2448893845, -5.8373462711)],
                knots=[0.0701791516, 0.0701791516, 0.0701791516, 0.0701791516, 0.0702460136, 0.0702460136, 0.0702460136, 0.0702460136], degree=3))
            add(Edge.make_bspline(
                [(12.2429114178, -5.8361085102), (12.24357074, -5.8365210972), (12.2442300623, -5.8369336841), (12.2448893845, -5.8373462711)],
                knots=[0, 0, 0, 0, 9.63938e-05, 9.63938e-05, 9.63938e-05, 9.63938e-05], degree=3))
        make_face()
        with BuildLine():
            add(Edge.make_bspline(
                [(12.2427023029, -5.8365471685), (12.2434313303, -5.8368135433), (12.2441603575, -5.8370799108), (12.2448893845, -5.8373462711)],
                knots=[0.0701791516, 0.0701791516, 0.0701791516, 0.0701791516, 0.0702460136, 0.0702460136, 0.0702460136, 0.0702460136], degree=3))
            ThreePointArc((12.2427023029, -5.8365471685), (9.5902820459, -9.5903875212), (5.8364125218, -12.242766493))
            add(Edge.make_bspline(
                [(5.8364125218, -12.242766493), (7.8640126159, -15.4827332927), (12.1444054008, -22.3225093182), (21.2142960732, -24.7235177216), (25.987826083, -25.9871807669)],
                knots=[0, 0, 0, 0, 0.4736948677, 1, 1, 1, 1], degree=3))
            add(Edge.make_bspline(
                [(12.2448893845, -5.8373462711), (15.4842471687, -7.8644533679), (22.3230423426, -12.1447253647), (24.7240445028, -21.2136821375), (25.987826083, -25.9871807669)],
                knots=[9.63938e-05, 9.63938e-05, 9.63938e-05, 9.63938e-05, 0.4736948677, 1, 1, 1, 1], degree=3))
        make_face()
        with BuildLine():
            ThreePointArc((5.8364125218, -12.242766493), (0, -13.5627815188), (-5.8364125218, -12.242766493))
            add(Edge.make_bspline(
                [(-5.8364125218, -12.242766493), (-7.4881688325, -16.7633312564), (-10.5639067692, -26.8820696151), (-3.7644701713, -36.5283294837), (0, -41.8734326959)],
                knots=[0.0701678859, 0.0701678859, 0.0701678859, 0.0701678859, 0.484766648, 1, 1, 1, 1], degree=3))
            add(Edge.make_bspline(
                [(5.8364125218, -12.242766493), (7.4881688325, -16.7633312564), (10.5639067692, -26.8820696151), (3.7644701713, -36.5283294837), (0, -41.8734326959)],
                knots=[0.0701678859, 0.0701678859, 0.0701678859, 0.0701678859, 0.484766648, 1, 1, 1, 1], degree=3))
        make_face()
        Polygon((5.4101836661, -25.7699513014), (2.9464173337, -30.5946371381), (-2.4637663324, -30.8732958237), (-5.4101836661, -26.3272686725), (-2.9464173337, -21.5025828357), (2.4637663324, -21.2239241501), align=None, mode=Mode.SUBTRACT)
        Polygon((2.9464173337, 21.5025828357), (5.4101836661, 26.3272686725), (2.4637663324, 30.8732958237), (-2.9464173337, 30.5946371381), (-5.4101836661, 25.7699513014), (-2.4637663324, 21.2239241501), align=None)
        Polygon((-30.8732958237, 2.4637663324), (-30.5946371381, -2.9464173337), (-25.7699513014, -5.4101836661), (-21.2239241501, -2.4637663324), (-21.5025828357, 2.9464173337), (-26.3272686725, 5.4101836661), align=None)
        Polygon((-2.4637663324, -30.8732958237), (2.9464173337, -30.5946371381), (5.4101836661, -25.7699513014), (2.4637663324, -21.2239241501), (-2.9464173337, -21.5025828357), (-5.4101836661, -26.3272686725), align=None)
        Polygon((30.8732958237, -2.4637663324), (30.5946371381, 2.9464173337), (25.7699513014, 5.4101836661), (21.2239241501, 2.4637663324), (21.5025828357, -2.9464173337), (26.3272686725, -5.4101836661), align=None)
    extrude(amount=F1_DEPTH)

    # F3 (through all)
    with Locations(Plane(origin=(0, 0, 0), x_dir=(1, 0, 0), z_dir=(0, 0, -1))):
        with Locations((0, 0)):
            Hole(F3_D / 2)


solid = f1.part
